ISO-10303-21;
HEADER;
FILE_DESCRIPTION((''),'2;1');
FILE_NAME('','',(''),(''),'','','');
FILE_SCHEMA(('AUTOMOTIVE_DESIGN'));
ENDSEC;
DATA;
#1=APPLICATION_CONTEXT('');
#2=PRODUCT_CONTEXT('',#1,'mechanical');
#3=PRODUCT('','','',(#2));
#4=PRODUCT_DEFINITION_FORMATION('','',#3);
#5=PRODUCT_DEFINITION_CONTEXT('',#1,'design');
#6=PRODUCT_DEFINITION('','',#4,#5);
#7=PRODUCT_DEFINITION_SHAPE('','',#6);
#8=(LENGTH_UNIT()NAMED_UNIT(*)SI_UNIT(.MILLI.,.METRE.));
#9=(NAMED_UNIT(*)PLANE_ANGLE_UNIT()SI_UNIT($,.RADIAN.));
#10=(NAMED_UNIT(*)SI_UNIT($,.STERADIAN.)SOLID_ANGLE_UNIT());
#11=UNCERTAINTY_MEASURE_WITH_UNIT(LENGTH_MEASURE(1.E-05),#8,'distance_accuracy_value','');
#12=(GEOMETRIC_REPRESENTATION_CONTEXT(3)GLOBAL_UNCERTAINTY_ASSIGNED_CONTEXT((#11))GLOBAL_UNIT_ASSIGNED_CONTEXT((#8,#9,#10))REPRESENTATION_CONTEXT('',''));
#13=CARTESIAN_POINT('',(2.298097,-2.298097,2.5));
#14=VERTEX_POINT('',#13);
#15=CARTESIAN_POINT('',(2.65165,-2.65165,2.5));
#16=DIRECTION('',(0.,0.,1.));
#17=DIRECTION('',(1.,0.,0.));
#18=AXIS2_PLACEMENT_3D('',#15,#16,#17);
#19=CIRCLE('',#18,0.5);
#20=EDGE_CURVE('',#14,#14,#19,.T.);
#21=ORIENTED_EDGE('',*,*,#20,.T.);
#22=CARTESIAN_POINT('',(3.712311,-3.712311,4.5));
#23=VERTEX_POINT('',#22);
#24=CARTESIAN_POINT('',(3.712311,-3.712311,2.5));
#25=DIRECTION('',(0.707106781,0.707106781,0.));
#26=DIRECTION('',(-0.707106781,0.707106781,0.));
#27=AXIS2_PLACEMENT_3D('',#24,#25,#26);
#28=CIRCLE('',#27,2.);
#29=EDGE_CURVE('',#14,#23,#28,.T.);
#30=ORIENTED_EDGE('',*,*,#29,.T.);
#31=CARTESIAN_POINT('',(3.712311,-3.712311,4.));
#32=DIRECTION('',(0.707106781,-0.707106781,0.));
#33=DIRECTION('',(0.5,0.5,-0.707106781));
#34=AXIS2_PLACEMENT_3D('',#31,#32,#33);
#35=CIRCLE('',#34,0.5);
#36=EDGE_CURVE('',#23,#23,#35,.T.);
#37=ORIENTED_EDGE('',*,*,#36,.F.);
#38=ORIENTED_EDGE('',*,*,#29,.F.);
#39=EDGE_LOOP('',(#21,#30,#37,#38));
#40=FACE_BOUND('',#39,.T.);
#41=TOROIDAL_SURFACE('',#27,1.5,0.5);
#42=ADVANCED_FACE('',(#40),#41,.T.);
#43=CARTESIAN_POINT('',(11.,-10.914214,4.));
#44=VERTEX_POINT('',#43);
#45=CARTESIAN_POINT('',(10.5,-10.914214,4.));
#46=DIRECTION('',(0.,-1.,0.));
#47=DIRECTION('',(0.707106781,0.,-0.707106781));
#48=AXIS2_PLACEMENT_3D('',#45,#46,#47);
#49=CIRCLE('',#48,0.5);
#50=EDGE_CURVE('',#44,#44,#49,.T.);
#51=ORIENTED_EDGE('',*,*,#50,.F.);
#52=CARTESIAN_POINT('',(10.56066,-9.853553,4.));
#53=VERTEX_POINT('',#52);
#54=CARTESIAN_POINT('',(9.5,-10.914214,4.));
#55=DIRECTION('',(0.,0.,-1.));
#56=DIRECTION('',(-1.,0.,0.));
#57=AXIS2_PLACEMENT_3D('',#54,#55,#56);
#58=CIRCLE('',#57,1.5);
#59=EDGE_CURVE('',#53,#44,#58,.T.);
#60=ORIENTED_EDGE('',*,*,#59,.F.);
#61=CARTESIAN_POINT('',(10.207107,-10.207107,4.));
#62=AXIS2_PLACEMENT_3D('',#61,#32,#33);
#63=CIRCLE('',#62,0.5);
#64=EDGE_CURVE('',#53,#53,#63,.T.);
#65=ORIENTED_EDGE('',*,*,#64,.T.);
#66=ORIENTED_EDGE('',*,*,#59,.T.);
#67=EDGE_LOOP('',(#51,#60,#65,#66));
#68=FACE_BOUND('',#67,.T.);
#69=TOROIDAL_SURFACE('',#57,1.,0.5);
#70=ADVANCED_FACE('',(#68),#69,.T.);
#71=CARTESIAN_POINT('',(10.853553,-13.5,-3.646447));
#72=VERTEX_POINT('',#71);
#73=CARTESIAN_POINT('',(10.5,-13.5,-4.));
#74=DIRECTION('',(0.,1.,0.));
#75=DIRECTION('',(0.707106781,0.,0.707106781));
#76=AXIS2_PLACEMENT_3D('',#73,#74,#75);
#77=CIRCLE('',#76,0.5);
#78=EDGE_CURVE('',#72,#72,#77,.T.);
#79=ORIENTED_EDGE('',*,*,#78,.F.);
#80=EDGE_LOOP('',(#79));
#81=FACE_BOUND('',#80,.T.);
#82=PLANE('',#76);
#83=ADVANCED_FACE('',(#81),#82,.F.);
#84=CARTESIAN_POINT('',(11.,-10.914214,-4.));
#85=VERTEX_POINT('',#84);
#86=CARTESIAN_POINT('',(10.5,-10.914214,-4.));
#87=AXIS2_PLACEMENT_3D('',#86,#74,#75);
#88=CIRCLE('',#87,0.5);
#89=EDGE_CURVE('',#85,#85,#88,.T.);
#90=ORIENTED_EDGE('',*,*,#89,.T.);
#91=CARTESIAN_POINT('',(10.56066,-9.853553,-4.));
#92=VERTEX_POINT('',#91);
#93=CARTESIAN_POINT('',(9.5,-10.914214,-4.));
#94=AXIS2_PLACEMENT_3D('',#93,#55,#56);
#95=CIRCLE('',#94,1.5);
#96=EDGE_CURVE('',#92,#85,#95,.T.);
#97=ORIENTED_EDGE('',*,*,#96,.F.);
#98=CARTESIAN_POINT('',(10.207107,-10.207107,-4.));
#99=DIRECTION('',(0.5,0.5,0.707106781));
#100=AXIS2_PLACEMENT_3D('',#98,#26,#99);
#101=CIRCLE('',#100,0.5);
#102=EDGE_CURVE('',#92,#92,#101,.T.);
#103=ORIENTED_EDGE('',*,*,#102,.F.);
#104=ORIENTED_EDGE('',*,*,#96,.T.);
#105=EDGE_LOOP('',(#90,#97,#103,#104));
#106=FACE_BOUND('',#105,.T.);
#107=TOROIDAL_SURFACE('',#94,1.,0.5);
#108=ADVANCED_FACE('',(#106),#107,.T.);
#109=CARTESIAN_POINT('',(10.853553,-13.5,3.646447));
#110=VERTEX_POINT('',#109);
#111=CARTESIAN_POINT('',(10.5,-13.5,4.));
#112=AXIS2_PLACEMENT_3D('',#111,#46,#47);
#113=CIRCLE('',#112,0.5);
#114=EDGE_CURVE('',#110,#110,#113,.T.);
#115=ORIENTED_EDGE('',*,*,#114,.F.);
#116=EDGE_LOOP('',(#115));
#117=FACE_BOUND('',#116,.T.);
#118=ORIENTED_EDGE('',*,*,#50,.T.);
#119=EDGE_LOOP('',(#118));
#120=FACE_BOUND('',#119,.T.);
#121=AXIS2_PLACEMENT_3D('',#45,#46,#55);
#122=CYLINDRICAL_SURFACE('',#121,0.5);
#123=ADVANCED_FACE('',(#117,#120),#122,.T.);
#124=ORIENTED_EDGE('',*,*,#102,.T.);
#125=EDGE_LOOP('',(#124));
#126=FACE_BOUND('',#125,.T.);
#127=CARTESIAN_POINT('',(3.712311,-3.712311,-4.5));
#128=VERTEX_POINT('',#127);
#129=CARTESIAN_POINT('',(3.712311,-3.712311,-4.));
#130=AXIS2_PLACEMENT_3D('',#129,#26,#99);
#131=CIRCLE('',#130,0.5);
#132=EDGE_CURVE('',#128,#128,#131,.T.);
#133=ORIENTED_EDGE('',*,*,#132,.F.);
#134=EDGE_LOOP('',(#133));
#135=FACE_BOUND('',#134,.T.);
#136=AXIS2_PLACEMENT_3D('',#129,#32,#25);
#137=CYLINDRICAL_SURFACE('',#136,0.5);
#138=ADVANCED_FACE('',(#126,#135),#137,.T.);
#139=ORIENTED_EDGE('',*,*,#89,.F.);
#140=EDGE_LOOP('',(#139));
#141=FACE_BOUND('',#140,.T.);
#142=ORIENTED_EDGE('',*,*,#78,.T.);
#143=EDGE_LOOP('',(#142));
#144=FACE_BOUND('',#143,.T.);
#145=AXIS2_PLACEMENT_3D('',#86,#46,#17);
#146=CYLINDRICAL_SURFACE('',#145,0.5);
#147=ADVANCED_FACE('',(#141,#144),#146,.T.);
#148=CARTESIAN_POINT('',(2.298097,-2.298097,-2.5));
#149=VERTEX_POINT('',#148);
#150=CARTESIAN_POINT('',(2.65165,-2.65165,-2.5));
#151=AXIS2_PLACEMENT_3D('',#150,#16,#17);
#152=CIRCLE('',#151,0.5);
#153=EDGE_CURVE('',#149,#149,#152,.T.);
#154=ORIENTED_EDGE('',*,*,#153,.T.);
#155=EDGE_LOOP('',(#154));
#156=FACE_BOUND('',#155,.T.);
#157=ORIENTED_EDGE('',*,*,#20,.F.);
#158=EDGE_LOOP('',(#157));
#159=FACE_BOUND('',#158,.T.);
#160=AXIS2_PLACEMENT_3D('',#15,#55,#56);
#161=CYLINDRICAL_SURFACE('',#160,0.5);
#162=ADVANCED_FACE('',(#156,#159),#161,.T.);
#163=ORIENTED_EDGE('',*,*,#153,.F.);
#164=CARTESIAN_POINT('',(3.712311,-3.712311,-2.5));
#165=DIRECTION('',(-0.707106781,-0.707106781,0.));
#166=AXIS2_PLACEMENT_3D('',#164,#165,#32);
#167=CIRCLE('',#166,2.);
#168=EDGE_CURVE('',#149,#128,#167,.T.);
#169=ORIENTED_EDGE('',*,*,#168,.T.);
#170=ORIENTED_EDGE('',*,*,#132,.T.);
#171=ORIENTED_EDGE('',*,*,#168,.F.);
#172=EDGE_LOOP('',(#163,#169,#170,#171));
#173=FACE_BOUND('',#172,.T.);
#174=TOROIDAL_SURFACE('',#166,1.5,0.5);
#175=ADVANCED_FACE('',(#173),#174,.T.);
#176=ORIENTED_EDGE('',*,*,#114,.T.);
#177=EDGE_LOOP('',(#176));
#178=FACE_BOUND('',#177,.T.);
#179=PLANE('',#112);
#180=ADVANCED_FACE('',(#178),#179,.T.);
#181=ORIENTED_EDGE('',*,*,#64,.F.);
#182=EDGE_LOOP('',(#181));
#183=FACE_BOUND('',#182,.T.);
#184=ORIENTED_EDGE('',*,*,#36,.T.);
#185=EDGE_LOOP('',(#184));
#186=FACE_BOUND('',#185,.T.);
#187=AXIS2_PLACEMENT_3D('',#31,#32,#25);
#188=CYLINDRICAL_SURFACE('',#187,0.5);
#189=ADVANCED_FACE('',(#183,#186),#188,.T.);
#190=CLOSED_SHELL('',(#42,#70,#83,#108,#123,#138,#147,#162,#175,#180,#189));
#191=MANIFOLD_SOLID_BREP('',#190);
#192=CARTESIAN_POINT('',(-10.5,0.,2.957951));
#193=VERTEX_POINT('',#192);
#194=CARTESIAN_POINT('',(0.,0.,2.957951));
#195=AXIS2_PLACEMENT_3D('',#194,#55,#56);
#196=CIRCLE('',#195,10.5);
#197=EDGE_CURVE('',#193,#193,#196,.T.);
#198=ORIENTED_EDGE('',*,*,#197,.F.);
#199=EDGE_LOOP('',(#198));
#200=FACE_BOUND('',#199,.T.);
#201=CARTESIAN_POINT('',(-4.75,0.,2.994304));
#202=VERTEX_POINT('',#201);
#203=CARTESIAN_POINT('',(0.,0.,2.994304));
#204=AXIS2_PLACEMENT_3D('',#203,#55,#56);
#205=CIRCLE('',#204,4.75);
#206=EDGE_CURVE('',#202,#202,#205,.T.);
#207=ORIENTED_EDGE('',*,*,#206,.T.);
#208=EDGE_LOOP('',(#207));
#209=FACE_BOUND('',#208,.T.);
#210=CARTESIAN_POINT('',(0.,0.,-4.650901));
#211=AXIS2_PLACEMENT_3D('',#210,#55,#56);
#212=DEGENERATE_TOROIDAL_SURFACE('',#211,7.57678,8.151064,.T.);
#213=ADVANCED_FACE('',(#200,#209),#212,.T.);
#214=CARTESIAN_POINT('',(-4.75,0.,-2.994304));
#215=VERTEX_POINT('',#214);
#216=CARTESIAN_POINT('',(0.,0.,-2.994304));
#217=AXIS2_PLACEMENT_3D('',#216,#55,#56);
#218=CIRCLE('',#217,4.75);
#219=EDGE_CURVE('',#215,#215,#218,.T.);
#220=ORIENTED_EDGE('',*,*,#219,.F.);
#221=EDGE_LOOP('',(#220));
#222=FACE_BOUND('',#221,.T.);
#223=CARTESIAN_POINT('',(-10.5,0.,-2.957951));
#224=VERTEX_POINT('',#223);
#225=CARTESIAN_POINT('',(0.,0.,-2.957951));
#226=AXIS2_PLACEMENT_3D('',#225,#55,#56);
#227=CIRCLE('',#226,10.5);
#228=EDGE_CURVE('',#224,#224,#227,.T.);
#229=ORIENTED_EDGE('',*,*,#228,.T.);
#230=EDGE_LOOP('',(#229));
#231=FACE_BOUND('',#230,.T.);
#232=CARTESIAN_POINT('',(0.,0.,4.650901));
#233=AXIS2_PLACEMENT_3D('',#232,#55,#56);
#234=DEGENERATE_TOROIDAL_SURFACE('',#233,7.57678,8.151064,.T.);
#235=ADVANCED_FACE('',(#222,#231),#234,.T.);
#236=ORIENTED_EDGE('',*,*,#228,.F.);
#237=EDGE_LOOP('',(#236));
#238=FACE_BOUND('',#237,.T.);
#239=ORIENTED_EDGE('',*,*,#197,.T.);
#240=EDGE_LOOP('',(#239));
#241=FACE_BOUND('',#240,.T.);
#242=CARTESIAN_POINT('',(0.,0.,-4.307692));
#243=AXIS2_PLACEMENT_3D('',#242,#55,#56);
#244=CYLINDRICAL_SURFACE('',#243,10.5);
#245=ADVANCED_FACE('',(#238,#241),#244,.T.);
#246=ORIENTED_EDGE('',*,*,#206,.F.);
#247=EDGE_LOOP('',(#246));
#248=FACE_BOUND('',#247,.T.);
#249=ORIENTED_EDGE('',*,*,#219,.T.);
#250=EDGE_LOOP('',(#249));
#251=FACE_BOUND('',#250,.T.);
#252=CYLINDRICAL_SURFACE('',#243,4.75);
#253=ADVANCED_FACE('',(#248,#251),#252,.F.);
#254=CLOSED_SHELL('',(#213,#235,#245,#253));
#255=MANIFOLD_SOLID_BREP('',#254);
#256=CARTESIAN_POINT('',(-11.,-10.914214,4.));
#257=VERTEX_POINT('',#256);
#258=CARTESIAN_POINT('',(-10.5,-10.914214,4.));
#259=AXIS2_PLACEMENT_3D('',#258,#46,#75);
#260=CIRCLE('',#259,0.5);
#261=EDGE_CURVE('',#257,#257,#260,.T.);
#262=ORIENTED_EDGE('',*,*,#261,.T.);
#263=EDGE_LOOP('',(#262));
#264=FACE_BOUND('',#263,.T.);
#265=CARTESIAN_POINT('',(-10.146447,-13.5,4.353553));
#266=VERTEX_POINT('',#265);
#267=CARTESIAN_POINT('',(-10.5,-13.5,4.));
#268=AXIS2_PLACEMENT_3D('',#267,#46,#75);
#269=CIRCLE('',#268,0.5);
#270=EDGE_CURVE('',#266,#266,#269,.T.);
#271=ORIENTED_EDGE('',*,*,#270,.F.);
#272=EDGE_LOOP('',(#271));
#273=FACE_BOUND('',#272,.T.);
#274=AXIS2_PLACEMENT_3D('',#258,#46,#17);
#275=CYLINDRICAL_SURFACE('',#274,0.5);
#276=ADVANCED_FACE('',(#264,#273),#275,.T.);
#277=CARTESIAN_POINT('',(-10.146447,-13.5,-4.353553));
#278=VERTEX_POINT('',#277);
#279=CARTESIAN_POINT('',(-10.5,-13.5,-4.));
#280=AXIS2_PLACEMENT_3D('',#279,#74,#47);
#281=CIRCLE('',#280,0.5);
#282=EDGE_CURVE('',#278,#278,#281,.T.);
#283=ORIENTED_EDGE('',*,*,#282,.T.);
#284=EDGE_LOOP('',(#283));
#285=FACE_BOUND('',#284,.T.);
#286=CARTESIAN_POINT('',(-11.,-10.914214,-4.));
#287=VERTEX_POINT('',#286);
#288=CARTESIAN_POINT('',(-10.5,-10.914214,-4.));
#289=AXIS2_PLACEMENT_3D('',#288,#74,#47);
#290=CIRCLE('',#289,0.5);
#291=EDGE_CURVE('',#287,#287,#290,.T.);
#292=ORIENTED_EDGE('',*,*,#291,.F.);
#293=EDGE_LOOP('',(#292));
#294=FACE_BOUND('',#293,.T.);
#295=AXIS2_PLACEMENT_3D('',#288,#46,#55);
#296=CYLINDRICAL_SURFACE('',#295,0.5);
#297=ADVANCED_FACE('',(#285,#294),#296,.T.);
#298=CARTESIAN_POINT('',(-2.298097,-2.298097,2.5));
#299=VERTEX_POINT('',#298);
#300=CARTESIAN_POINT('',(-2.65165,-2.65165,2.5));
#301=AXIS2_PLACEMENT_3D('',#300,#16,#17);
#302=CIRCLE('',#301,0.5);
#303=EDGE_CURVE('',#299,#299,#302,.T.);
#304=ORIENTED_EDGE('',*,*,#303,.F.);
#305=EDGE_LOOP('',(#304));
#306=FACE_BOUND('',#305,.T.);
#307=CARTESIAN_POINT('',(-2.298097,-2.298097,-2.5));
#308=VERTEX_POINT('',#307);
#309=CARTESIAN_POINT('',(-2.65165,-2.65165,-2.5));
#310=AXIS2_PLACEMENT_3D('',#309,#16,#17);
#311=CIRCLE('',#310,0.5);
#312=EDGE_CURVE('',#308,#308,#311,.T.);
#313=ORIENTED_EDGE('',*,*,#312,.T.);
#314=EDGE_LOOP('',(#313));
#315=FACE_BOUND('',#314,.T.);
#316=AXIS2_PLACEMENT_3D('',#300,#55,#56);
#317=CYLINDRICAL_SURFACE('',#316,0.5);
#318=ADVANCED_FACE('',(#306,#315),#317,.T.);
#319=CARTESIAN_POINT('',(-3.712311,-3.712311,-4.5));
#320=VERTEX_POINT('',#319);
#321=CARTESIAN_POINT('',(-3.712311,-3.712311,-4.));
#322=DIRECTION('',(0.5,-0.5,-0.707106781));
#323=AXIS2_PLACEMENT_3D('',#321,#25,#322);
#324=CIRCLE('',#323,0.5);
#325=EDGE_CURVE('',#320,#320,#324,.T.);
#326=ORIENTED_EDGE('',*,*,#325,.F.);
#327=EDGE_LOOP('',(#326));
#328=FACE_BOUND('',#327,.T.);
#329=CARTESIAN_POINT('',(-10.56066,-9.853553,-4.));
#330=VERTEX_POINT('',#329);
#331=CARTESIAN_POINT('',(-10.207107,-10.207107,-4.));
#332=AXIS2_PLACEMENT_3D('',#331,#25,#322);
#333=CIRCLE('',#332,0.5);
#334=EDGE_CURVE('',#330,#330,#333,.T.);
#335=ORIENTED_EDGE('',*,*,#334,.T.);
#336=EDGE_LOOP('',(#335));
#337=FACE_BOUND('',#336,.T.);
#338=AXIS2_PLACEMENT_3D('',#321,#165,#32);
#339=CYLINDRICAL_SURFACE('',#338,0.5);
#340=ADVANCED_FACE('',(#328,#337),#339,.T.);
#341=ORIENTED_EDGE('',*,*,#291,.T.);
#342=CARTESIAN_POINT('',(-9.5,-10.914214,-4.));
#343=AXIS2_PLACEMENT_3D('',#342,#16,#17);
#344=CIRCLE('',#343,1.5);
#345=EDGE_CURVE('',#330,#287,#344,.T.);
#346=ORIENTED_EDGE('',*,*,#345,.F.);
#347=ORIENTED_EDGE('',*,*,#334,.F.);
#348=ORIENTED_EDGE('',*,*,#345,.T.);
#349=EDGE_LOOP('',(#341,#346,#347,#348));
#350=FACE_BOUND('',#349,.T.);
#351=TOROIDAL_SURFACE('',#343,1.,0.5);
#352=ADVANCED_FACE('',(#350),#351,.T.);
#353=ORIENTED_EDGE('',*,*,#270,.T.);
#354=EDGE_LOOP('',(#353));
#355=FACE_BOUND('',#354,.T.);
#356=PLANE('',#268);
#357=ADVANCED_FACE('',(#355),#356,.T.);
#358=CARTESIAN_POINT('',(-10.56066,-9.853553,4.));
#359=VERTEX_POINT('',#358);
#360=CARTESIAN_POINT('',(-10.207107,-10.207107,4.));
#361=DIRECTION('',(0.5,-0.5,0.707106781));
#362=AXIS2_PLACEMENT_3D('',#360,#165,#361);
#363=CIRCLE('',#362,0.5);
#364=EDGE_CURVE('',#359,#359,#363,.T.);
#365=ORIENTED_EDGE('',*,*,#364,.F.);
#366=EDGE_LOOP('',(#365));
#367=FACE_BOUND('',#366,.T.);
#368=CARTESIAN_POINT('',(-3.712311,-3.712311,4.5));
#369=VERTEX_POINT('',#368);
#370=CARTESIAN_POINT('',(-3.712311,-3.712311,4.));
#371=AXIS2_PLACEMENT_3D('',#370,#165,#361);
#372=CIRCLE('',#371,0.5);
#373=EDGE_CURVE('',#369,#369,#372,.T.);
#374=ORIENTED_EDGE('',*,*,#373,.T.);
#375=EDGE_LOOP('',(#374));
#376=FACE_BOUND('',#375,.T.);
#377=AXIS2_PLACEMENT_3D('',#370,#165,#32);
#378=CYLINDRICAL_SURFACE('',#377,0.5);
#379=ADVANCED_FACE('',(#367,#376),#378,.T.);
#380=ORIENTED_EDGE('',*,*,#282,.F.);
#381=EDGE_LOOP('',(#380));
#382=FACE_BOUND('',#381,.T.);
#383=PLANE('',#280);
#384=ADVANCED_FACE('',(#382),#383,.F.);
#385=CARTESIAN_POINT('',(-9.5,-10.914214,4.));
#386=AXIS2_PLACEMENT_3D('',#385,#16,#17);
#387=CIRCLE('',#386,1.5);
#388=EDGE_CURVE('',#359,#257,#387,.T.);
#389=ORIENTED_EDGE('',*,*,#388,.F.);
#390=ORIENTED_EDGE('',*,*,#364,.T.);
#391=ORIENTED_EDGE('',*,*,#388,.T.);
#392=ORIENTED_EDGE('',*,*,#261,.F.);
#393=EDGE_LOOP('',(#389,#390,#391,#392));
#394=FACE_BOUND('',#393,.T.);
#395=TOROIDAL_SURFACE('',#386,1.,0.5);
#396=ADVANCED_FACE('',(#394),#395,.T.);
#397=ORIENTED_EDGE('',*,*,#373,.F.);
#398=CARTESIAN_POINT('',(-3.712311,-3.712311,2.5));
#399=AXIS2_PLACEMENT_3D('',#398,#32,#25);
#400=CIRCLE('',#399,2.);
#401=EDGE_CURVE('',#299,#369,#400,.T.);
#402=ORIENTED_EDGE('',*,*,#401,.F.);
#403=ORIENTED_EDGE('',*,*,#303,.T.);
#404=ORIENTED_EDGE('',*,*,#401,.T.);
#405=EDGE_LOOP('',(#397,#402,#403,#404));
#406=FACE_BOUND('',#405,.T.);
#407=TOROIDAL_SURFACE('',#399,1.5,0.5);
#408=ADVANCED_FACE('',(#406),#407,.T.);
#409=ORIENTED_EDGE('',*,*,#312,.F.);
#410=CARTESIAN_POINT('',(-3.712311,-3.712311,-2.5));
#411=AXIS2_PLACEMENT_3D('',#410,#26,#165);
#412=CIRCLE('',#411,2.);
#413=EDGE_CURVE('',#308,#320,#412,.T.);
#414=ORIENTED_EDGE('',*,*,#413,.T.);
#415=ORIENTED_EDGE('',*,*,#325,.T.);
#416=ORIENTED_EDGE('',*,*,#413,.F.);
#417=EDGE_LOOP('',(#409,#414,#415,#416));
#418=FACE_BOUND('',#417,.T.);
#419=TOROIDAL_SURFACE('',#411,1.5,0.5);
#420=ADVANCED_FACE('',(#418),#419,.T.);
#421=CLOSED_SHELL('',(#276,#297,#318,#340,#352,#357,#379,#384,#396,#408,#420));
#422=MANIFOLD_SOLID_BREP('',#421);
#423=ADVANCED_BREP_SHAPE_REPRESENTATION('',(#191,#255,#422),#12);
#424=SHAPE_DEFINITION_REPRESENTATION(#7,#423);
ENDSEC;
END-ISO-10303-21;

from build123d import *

# Parameters (mm, degrees)
SKETCH_7_R          = 0.5
SKETCH_6_R          = 0.5
SWEEP_5_OUTLINE_R   = 0.5
SWEEP_5_ANGLE       = 45
SWEEP_5_2_OUTLINE_R = 0.5
SWEEP_5_2_ANGLE     = 90
SWEEP_START         = -13.5
SWEEP_5_3_OUTLINE_R = 0.5
SWEEP_5_3_DEPTH     = 2.585786538
SWEEP_START_2       = 5.2499999
SWEEP_5_4_OUTLINE_R = 0.5
SWEEP_5_4_DEPTH     = 9.185029043
SWEEP_5_5_OUTLINE_R = 0.5
SWEEP_5_5_DEPTH     = 2.5000001
SKETCH_9_R          = 0.5


with BuildPart() as part:
    # Эскиз1 → Повернуть1 (revolve)
    with BuildSketch(Plane(origin=(0, 0, 0), x_dir=(1, 0, 0), z_dir=(0, 1, 0)), mode=Mode.PRIVATE) as revolve_1_sk:
        with BuildLine():
            Line((4.75, 2.99430396), (4.75, -2.99430396))
            ThreePointArc((4.75, -2.99430396), (7.628312068, -3.5), (10.5, -2.957950866))
            Line((10.5, -2.957950866), (10.5, 2.957950866))
            ThreePointArc((10.5, 2.957950866), (7.628312068, 3.5), (4.75, 2.99430396))
        make_face()
    revolve(revolve_1_sk.sketch.rotate(Axis((0, 0, -4.307692308), (0, 0, 1)), 180), axis=Axis((0, 0, -4.307692308), (0, 0, 1)))


with BuildPart() as body_2:
    # По траектории2: sweep along a curve in space
    with BuildLine() as sweep_2_path:
        Line((-10.5, -13.5, 3.499999979), (-10.5, -10.914213562, 3.499999979))
        ThreePointArc((-10.5, -10.914213562, 3.499999979), (-10.423879533, -10.53153013, 3.499999979), (-10.207106781, -10.207106781, 3.499999979))
        Line((-10.207106781, -10.207106781, 3.499999979), (-3.712310601, -3.712310601, 3.499999979))
        ThreePointArc((-3.712310601, -3.712310601, 3.499999979), (-3.212310601, -3.212310601, 3.207106761), (-3.00520382, -3.00520382, 2.499999979))
        Line((-3.00520382, -3.00520382, 0), (-3.00520382, -3.00520382, 2.499999979))
    # Эскиз7 → По траектории2 (sweep)
    with BuildSketch(Plane.XY):
        with Locations((-2.651650429, -2.651650429)):
            Circle(SKETCH_7_R)
    sweep(path=sweep_2_path.line)

    # По траектории4: sweep along a curve in space
    with BuildLine() as sweep_4_path:
        Line((-10.5, -13.5, -3.5), (-10.5, -10.914213562, -3.5))
        ThreePointArc((-10.5, -10.914213562, -3.5), (-10.423879533, -10.53153013, -3.5), (-10.207106781, -10.207106781, -3.5))
        Line((-10.207106781, -10.207106781, -3.5), (-3.712310601, -3.712310601, -3.5))
        ThreePointArc((-3.712310601, -3.712310601, -3.5), (-3.212310601, -3.212310601, -3.207106781), (-3.00520382, -3.00520382, -2.5))
        Line((-3.00520382, -3.00520382, -2.5), (-3.00520382, -3.00520382, 0))
    # Эскиз6 → По траектории4 (sweep)
    with BuildSketch(Plane.XY):
        with Locations((-2.651650429, -2.651650429)):
            Circle(SKETCH_6_R)
    sweep(path=sweep_4_path.line)


with BuildPart() as body_3:
    # По траектории5: read off the stored shape, not the designer's step
    # По траектории5 outline → По траектории5 (revolve)
    with BuildSketch(Plane(origin=(9.5, -10.914213562, 0), x_dir=(1, 0, 0), z_dir=(0, -1, 0))):
        with Locations((1, 4)):
            Circle(SWEEP_5_OUTLINE_R)
    revolve(axis=Axis((9.5, -10.914213562, 0), (0, 0, 1)), revolution_arc=SWEEP_5_ANGLE)

    # Sweep 5 2 outline → Sweep 5 2 (revolve)
    with BuildSketch(Plane(origin=(3.712310601, -3.712310601, 2.5), x_dir=(-0.707106781186557, 0.707106781186538, 0), z_dir=(0, 0, -1))):
        with Locations((1.5, 0)):
            Circle(SWEEP_5_2_OUTLINE_R)
    revolve(axis=Axis((3.712310601, -3.712310601, 2.5), (0.707106781186538, 0.707106781186557, 0)), revolution_arc=SWEEP_5_2_ANGLE)

    # Sweep 5 3 outline → Sweep 5 3 (add)
    with BuildSketch(Plane(origin=(0, 0, 0), x_dir=(1, 0, 0), z_dir=(0, 1, 0)).offset(SWEEP_START)):
        with Locations((10.5, -4)):
            Circle(SWEEP_5_3_OUTLINE_R)
    extrude(amount=SWEEP_5_3_DEPTH)

    # Sweep 5 4 outline → Sweep 5 4 (add)
    with BuildSketch(Plane(origin=(0, 0, 0), x_dir=(0.707106781186539, 0.707106781186556, 0), z_dir=(0.707106781186556, -0.707106781186539, 0)).offset(SWEEP_START_2)):
        with Locations((0, 4)):
            Circle(SWEEP_5_4_OUTLINE_R)
    extrude(amount=SWEEP_5_4_DEPTH)

    # Sweep 5 5 outline → Sweep 5 5 (add)
    with BuildSketch(Plane.XY):
        with Locations((2.651650429, -2.651650429)):
            Circle(SWEEP_5_5_OUTLINE_R)
    extrude(amount=SWEEP_5_5_DEPTH)

    # По траектории6: sweep along a curve in space
    with BuildLine() as sweep_6_path:
        Line((3.00520382, -3.00520382, -2.5), (3.00520382, -3.00520382, 0))
        ThreePointArc((3.712310601, -3.712310601, -3.5), (3.212310601, -3.212310601, -3.207106781), (3.00520382, -3.00520382, -2.5))
        Line((10.207106781, -10.207106781, -3.5), (3.712310601, -3.712310601, -3.5))
        ThreePointArc((10.5, -10.914213562, -3.5), (10.423879533, -10.53153013, -3.5), (10.207106781, -10.207106781, -3.5))
        Line((10.5, -13.5, -3.5), (10.5, -10.914213562, -3.5))
    # Эскиз9 → По траектории6 (sweep)
    with BuildSketch(Plane.XY):
        with Locations((2.651650429, -2.651650429)):
            Circle(SKETCH_9_R)
    sweep(path=sweep_6_path.line)


solid = Compound([part.part, body_2.part, body_3.part])
